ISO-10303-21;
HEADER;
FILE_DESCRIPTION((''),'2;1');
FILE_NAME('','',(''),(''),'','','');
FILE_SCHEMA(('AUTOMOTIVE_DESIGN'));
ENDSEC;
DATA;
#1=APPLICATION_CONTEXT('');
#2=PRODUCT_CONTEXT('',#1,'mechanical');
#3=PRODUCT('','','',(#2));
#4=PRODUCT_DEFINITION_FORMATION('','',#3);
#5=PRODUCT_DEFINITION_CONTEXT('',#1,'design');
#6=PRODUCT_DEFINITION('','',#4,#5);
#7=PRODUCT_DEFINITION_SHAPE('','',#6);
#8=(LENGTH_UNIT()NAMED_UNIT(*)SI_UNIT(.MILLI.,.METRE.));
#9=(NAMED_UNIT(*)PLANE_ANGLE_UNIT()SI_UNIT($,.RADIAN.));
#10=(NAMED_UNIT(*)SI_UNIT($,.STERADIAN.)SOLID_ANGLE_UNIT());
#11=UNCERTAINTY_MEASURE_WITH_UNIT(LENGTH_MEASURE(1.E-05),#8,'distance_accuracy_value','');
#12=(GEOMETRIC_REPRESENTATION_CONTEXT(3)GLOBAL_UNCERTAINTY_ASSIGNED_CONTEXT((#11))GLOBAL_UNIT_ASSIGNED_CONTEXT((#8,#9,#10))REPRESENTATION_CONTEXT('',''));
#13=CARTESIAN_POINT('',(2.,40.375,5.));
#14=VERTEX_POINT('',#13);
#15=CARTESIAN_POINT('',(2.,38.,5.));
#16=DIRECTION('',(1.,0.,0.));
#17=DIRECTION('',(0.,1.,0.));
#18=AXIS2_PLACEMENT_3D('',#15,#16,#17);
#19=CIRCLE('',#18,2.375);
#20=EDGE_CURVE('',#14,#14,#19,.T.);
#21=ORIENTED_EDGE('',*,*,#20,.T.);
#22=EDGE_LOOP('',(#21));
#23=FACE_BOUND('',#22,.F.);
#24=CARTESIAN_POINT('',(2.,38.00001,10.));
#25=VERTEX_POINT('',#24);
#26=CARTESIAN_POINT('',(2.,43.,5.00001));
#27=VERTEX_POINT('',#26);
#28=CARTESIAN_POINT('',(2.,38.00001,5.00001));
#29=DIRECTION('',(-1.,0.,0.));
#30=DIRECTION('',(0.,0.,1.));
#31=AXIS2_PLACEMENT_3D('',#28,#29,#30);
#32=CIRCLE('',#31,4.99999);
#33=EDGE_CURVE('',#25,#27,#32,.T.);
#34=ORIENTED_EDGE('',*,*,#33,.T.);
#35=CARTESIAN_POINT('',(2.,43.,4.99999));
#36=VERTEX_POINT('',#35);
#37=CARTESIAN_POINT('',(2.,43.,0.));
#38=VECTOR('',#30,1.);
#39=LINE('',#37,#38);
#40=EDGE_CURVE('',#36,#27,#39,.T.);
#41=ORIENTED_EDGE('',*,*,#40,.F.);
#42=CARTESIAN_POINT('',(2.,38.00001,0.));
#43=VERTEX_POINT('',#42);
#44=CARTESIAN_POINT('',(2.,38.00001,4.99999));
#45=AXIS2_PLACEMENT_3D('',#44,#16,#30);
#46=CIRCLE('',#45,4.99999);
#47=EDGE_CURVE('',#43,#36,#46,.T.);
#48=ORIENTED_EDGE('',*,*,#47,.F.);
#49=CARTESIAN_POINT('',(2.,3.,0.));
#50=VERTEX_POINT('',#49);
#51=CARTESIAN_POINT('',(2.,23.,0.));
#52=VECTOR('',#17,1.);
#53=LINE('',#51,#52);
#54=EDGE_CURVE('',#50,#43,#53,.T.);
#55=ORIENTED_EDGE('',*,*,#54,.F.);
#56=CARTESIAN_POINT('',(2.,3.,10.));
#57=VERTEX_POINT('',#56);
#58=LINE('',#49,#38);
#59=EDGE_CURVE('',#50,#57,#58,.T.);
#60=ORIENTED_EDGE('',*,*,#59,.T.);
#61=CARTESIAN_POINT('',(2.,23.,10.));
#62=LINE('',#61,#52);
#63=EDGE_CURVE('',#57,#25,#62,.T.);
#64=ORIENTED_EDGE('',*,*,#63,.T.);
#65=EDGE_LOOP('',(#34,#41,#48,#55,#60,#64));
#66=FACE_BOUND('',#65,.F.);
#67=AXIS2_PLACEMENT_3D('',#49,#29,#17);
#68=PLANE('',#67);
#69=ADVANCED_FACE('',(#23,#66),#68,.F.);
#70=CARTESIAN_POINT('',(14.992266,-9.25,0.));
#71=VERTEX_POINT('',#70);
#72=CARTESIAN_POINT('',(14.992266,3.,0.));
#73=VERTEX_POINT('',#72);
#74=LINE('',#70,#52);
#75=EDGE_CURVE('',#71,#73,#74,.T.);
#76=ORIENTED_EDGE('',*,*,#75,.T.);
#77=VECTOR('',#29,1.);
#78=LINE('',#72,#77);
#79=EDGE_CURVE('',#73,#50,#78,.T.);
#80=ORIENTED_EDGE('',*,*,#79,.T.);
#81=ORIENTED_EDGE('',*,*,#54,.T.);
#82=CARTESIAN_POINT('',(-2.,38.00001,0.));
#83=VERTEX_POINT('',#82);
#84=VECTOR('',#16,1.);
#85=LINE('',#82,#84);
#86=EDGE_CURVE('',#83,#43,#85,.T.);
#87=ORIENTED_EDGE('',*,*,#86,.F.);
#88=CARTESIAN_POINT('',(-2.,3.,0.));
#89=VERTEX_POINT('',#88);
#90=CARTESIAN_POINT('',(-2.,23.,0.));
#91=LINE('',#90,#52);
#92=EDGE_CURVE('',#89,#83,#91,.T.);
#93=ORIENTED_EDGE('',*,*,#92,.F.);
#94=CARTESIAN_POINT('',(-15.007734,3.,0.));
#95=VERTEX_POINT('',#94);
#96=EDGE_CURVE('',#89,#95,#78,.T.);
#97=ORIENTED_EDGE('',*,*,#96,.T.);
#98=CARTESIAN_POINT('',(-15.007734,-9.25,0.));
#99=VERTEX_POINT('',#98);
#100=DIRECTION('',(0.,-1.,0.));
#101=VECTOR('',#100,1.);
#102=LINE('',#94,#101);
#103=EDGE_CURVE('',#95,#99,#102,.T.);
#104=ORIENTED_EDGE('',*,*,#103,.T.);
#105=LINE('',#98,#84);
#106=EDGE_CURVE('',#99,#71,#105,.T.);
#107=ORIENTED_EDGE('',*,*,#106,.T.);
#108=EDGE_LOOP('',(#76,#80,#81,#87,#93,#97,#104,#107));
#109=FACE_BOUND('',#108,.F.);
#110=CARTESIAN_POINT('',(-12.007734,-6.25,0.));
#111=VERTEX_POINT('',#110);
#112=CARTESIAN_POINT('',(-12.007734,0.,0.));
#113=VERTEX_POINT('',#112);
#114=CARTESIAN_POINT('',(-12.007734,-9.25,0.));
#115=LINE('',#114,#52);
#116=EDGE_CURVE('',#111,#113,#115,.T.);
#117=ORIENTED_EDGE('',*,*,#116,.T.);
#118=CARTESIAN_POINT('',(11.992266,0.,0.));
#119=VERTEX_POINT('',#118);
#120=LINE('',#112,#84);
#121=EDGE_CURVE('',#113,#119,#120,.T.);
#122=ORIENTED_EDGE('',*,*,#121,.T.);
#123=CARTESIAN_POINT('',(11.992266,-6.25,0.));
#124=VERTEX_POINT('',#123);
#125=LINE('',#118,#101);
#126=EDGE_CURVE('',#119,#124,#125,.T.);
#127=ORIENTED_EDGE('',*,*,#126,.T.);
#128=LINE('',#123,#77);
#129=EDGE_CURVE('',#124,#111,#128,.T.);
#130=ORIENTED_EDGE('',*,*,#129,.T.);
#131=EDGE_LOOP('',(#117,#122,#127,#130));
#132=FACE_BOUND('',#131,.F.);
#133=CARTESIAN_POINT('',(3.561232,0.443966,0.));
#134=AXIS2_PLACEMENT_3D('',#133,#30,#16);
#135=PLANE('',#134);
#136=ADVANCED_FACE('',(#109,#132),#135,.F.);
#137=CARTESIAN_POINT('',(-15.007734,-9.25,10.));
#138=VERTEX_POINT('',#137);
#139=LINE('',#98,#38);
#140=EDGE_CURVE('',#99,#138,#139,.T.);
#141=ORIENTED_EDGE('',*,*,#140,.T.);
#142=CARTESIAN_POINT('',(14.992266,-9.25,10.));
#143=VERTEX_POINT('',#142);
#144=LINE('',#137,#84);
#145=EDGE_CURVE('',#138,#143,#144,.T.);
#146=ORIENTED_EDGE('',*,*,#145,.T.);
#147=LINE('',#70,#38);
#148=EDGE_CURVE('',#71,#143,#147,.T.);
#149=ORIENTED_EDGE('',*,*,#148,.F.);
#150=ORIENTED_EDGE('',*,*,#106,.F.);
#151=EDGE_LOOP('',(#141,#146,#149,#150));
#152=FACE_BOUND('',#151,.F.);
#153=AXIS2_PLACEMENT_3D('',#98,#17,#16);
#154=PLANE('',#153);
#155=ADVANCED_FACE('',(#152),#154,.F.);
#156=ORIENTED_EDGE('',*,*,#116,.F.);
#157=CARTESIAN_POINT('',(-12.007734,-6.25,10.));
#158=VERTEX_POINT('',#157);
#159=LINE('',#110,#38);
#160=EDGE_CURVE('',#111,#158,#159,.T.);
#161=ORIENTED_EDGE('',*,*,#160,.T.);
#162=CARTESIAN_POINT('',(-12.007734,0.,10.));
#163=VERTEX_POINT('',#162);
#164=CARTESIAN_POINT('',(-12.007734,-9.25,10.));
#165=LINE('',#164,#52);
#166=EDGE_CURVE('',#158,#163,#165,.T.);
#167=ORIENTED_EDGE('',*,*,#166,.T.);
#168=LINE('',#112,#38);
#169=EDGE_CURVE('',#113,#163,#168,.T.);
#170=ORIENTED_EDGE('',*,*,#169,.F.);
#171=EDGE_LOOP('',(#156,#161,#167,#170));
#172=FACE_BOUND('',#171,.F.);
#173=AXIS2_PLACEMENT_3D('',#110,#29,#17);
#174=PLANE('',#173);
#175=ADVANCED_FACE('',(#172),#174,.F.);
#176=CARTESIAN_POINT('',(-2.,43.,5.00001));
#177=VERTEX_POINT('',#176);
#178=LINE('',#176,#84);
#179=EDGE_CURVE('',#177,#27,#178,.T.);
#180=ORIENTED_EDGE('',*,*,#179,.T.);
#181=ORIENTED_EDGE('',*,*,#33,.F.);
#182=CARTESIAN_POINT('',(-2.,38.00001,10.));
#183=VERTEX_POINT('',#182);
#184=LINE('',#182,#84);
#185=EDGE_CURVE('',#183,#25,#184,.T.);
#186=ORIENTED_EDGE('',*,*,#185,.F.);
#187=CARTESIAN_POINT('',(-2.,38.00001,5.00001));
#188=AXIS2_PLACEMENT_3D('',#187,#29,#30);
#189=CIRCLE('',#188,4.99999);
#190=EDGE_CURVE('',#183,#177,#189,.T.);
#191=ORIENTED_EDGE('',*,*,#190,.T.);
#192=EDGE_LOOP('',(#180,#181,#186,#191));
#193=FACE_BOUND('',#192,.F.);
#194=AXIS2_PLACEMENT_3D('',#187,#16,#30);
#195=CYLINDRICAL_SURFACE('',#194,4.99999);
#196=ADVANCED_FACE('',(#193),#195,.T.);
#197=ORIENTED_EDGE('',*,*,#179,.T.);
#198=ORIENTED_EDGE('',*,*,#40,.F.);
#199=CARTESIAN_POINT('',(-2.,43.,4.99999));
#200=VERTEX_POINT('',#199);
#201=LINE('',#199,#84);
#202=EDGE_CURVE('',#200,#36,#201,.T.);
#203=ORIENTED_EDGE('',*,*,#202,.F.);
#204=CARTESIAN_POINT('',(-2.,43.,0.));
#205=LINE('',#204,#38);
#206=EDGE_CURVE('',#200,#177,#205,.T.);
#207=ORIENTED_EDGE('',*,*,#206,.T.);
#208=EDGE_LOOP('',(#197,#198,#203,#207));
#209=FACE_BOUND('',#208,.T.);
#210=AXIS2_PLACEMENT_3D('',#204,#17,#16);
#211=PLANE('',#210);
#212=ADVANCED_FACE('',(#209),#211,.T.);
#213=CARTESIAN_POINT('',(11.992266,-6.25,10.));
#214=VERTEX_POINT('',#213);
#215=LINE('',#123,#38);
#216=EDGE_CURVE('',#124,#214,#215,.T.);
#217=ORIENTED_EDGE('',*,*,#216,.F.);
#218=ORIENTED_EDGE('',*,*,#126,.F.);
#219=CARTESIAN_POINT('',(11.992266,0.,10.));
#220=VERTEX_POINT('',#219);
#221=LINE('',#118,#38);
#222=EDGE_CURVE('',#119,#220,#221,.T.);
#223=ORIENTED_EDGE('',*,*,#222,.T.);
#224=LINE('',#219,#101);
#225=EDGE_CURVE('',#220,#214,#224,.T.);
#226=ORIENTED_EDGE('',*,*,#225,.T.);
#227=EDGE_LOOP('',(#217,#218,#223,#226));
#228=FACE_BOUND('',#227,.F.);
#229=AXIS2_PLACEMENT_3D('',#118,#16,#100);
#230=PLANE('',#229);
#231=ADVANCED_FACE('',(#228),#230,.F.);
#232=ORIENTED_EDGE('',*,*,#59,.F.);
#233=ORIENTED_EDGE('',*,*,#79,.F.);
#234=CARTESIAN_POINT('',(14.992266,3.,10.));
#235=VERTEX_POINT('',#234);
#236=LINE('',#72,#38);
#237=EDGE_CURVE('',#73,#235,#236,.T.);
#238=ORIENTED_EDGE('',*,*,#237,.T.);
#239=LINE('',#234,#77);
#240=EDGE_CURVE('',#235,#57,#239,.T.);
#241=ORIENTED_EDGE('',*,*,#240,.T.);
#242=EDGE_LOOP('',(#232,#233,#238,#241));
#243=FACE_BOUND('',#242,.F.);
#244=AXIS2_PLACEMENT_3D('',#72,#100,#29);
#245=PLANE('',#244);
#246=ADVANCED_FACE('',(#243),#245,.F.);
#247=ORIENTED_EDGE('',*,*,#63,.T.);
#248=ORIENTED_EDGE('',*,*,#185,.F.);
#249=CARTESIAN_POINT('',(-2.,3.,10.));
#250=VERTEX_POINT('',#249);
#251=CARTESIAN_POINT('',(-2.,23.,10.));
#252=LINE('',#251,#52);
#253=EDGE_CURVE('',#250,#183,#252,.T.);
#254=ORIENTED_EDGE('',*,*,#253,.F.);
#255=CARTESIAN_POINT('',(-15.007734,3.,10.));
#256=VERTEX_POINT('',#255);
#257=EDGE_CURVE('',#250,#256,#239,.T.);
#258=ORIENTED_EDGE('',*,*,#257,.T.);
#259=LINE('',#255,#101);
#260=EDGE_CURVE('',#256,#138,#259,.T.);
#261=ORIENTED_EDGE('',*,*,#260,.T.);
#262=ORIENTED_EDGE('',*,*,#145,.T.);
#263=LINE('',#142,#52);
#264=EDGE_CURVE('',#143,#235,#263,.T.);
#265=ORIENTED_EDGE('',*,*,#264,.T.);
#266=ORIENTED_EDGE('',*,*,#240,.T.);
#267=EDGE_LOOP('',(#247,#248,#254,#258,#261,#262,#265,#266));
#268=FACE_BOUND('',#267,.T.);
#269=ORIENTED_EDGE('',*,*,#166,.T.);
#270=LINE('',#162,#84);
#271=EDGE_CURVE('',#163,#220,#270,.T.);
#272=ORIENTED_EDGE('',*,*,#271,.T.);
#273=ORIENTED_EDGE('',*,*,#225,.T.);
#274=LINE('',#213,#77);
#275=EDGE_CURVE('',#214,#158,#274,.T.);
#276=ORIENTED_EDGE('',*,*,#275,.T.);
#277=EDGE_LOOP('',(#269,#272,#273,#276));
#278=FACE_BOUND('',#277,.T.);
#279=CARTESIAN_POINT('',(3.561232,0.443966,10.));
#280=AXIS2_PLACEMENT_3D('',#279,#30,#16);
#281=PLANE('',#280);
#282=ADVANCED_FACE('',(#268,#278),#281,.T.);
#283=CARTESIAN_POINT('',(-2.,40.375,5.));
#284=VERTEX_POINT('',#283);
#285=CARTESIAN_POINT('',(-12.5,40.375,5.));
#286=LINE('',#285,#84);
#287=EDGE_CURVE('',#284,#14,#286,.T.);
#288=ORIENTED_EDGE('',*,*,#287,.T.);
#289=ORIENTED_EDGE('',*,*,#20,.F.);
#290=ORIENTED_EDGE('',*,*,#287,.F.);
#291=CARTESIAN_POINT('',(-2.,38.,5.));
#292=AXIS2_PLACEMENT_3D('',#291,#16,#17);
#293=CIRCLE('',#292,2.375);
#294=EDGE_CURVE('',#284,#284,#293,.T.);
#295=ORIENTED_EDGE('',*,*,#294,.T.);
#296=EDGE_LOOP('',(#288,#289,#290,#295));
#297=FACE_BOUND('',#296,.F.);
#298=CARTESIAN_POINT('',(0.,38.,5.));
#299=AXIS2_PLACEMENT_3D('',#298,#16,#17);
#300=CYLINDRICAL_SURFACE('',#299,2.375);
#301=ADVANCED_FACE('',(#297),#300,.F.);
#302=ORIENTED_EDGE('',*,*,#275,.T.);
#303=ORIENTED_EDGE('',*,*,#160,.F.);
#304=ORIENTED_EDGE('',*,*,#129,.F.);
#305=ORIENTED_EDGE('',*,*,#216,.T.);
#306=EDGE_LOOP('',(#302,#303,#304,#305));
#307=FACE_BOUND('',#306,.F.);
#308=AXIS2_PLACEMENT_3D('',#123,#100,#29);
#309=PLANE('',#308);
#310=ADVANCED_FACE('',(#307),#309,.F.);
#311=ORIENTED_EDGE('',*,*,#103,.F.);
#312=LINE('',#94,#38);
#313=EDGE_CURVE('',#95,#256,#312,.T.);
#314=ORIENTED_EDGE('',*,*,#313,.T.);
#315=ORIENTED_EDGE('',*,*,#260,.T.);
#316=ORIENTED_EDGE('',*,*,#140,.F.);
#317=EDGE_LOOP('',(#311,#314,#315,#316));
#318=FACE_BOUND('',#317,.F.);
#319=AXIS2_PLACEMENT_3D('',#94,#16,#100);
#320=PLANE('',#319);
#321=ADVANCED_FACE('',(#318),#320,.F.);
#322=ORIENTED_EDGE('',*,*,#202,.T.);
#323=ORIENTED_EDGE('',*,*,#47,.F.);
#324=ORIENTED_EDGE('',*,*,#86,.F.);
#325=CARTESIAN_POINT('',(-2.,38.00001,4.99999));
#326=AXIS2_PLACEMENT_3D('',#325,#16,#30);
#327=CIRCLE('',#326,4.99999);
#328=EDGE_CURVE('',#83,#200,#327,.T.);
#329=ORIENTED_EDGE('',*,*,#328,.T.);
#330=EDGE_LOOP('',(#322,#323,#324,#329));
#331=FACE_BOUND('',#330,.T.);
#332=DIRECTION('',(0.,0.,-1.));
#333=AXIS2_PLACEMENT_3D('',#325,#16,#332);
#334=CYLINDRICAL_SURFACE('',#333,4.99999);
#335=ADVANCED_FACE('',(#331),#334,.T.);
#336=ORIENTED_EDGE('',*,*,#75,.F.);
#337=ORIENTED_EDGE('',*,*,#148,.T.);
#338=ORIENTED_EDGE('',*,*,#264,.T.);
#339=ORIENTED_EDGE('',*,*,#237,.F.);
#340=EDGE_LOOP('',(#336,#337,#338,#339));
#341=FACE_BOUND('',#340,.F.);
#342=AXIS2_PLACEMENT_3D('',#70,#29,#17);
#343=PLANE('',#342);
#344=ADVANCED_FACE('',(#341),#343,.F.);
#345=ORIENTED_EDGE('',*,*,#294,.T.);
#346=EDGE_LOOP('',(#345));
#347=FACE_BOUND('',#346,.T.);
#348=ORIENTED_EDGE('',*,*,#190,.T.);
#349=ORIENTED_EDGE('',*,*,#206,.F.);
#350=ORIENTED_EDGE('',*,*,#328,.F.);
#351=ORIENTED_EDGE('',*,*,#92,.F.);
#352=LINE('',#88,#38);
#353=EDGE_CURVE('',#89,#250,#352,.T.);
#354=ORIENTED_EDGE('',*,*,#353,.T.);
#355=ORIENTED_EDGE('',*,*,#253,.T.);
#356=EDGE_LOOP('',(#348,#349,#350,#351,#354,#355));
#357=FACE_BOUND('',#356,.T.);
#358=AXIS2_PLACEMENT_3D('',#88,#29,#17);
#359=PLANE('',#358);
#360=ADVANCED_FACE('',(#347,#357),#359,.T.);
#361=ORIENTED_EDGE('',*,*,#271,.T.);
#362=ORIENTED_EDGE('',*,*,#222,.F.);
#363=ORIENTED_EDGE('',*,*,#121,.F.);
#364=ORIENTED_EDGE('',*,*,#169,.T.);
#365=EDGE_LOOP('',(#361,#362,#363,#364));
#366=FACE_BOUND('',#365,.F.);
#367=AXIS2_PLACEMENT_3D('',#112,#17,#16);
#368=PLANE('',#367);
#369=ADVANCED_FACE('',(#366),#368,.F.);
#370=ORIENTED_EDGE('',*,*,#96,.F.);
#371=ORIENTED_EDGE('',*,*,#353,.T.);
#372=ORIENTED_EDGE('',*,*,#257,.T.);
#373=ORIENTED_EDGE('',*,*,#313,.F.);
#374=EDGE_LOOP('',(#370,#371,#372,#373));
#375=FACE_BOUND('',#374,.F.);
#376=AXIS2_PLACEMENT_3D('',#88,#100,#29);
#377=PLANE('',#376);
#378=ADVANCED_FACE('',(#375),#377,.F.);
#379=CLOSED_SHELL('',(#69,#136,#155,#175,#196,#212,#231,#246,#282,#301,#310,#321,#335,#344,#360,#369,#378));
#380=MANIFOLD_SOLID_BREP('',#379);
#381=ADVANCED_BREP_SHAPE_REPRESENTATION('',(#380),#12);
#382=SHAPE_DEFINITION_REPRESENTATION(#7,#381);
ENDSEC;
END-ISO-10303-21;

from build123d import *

# Parameters (mm, degrees)
F0_W     = 4
F0_H     = 40
F1_DEPTH = 10
F2_R     = 2.375
F3_DEPTH = 12.5
F4_R     = 4.99999


# Not quite as in the source:
# - a fillet or chamfer is up to 0.001 mm smaller than in the source, because OpenCascade refuses the exact size


with BuildPart() as f1:
    # F0 (on Top) → F1 (new body)
    with BuildSketch(Plane.XY):
        Polygon((-12.0077335707, 3), (-12.0077335707, 0), (11.9922664293, 0), (11.9922664293, -6.25), (14.9922664293, -6.25), (14.9922664293, 3), (2, 3), (-2, 3), align=None)
        Polygon((-12.0077335707, -6.25), (-12.0077335707, 0), (-12.0077335707, 3), (-15.0077335707, 3), (-15.0077335707, -9.25), (-12.0077335707, -9.25), align=None)
        Polygon((11.9922664293, -6.25), (-12.0077335707, -6.25), (-12.0077335707, -9.25), (14.9922664293, -9.25), (14.9922664293, -6.25), align=None)
        with Locations((0, 23)):
            Rectangle(F0_W, F0_H)
    extrude(amount=F1_DEPTH)

    # F2 (on Right) → F3 (cut, symmetric)
    with BuildSketch(Plane.YZ):
        with Locations((38, 5)):
            Circle(F2_R)
    extrude(amount=F3_DEPTH, both=True, mode=Mode.SUBTRACT)

    # F4 (radius 5 in the source; OpenCascade refuses exactly that, so slightly less here)
    f4_edges = [f1.edges().sort_by_distance(p)[0] for p in [
        (0, 43, 10),
        (0, 43, 0),
    ]]
    fillet(f4_edges, radius=F4_R)


solid = f1.part
